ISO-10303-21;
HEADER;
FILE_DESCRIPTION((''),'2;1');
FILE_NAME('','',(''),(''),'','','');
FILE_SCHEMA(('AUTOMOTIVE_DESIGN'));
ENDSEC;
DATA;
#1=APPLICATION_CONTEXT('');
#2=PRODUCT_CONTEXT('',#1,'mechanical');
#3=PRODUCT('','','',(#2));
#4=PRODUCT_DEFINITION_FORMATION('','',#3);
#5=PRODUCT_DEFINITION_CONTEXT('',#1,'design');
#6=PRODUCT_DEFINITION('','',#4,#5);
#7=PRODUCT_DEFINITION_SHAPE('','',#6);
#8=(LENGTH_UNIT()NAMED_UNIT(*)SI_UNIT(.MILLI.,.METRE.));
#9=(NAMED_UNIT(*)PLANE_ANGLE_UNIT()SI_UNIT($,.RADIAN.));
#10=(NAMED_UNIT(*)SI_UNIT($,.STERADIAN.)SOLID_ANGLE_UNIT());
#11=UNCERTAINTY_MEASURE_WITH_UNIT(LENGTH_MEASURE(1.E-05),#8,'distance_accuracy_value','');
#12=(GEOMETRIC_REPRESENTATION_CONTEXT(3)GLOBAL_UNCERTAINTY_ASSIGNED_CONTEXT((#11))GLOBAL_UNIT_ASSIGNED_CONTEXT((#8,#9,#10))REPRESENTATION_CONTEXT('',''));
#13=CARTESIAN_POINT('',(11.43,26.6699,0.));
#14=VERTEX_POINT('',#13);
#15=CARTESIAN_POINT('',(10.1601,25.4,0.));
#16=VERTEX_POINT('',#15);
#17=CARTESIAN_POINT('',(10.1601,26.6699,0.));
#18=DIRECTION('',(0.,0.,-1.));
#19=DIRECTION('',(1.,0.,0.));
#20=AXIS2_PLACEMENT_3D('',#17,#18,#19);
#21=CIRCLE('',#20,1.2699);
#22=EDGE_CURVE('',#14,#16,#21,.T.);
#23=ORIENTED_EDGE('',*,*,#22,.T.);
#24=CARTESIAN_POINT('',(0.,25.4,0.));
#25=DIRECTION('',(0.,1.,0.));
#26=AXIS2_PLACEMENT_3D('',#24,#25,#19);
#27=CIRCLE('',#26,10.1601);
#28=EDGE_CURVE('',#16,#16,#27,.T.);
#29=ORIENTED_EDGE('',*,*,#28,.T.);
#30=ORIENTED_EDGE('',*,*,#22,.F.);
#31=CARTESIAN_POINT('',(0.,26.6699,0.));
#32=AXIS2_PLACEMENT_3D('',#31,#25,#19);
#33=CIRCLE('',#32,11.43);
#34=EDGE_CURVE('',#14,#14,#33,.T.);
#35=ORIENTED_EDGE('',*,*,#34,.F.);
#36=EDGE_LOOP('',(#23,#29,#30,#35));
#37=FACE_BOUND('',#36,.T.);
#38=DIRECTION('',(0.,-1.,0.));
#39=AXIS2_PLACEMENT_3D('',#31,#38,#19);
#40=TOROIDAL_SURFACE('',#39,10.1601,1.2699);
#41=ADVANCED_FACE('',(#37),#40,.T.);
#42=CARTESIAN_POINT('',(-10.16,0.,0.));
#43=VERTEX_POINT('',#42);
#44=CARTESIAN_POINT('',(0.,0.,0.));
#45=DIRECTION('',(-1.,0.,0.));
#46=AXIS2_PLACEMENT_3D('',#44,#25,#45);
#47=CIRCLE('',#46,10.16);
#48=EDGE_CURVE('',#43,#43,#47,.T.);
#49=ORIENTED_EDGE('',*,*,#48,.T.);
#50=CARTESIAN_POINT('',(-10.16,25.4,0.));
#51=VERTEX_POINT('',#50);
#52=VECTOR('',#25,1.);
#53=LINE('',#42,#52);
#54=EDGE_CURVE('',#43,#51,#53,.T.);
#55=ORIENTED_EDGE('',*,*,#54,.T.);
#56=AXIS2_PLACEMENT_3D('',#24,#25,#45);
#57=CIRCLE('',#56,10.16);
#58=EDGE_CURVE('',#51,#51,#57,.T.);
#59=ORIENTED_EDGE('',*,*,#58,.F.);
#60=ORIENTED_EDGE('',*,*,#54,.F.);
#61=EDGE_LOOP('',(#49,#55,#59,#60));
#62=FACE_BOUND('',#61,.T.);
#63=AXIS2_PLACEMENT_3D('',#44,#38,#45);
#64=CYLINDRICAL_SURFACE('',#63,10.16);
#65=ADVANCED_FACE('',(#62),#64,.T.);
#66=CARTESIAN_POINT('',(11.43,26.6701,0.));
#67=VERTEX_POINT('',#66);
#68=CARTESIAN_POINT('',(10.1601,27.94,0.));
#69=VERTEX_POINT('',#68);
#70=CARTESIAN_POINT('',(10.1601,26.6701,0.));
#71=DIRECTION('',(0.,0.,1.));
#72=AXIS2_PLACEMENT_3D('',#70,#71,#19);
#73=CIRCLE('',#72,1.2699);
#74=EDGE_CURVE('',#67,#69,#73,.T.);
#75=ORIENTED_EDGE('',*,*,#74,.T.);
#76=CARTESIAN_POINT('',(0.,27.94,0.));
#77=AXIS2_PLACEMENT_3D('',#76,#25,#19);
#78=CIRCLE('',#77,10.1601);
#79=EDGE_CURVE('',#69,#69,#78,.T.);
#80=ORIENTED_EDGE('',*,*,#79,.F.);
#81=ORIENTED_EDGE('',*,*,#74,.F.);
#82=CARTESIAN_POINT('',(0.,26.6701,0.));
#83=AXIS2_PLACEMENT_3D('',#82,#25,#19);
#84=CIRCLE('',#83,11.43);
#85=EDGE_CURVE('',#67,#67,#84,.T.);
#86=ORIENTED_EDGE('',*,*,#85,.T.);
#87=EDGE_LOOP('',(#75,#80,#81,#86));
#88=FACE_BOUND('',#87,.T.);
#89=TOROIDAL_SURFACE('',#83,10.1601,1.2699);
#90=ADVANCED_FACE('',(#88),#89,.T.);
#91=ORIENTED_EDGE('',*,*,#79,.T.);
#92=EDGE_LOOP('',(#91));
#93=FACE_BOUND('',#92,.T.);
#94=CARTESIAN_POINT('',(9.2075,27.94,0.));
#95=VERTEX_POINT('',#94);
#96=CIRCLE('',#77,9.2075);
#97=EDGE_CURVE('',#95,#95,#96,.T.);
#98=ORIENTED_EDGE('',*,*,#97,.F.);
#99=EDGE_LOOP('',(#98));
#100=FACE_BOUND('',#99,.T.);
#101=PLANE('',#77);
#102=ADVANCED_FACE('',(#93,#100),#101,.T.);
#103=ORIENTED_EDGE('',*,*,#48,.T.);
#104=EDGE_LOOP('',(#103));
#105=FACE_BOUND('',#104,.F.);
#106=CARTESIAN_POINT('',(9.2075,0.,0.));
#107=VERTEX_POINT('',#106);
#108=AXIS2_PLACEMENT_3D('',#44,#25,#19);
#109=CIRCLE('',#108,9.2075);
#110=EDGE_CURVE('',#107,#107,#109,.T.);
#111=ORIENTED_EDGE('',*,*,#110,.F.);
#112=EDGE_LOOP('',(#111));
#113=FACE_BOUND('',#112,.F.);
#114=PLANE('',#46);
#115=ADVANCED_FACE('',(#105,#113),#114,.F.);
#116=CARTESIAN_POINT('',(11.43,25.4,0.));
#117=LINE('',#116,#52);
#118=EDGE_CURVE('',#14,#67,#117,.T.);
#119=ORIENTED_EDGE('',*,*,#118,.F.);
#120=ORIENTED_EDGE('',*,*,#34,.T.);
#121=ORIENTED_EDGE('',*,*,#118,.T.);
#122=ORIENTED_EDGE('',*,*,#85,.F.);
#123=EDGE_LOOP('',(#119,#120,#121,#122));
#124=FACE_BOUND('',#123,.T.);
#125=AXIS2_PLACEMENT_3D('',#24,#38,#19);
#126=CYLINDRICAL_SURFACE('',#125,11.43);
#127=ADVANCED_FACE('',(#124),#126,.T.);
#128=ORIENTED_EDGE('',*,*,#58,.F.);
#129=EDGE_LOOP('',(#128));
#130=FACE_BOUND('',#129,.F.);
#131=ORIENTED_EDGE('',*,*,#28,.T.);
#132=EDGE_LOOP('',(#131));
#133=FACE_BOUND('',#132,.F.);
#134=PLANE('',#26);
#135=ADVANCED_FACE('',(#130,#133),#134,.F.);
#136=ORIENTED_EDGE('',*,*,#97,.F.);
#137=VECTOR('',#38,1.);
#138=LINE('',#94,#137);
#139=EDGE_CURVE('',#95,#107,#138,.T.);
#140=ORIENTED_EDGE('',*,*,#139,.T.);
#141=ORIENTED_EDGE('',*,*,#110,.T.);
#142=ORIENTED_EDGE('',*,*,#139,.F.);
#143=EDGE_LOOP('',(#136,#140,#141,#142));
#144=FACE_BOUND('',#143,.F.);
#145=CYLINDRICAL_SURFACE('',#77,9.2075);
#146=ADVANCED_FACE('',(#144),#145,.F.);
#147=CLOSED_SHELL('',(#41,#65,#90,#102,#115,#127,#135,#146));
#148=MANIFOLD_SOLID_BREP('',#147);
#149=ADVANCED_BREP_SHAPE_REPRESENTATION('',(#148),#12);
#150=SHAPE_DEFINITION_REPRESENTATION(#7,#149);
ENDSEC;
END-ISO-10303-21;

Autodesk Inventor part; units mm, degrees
ref_plane "YZ Plane" through (0, 0, 0) normal (1, 0, 0) x (0, 1, 0)
ref_plane "XZ Plane" through (0, 0, 0) normal (0, 1, 0) x (-1, 0, 0)
ref_plane "XY Plane" through (0, 0, 0) normal (0, 0, 1) x (1, 0, 0)
sketch "Sketch1" plane through (0, 0, 0) normal (0, 1, 0) x (-1, 0, 0)
  circle A0 centre (0, 0) radius 10.16
  dimension "d0" = 20.32
extrude "Extrusion1" add sketch "Sketch1" along normal blind 25.4
sketch "Sketch2" plane through (0, 25.4, 0) normal (0, 1, 0) x (1, 0, 0)
  circle A0 centre (0, 0) radius 11.43
  dimension "d3" = 22.86
extrude "Extrusion2" add sketch "Sketch2" along normal blind 2.54
fillet "Fillet1" radius 1.27 2 edges at (-11.43, 25.4, 0) (-11.43, 27.94, 0)
sketch "Sketch3" plane through (0, 27.94, 0) normal (0, 1, 0) x (1, 0, 0)
  circle A0 centre (0, 0) radius 9.2075
  dimension "d7" = 18.415
extrude "Extrusion3" cut sketch "Sketch3" against normal blind 31.75
properties part number "Stack of train [Copy]"
